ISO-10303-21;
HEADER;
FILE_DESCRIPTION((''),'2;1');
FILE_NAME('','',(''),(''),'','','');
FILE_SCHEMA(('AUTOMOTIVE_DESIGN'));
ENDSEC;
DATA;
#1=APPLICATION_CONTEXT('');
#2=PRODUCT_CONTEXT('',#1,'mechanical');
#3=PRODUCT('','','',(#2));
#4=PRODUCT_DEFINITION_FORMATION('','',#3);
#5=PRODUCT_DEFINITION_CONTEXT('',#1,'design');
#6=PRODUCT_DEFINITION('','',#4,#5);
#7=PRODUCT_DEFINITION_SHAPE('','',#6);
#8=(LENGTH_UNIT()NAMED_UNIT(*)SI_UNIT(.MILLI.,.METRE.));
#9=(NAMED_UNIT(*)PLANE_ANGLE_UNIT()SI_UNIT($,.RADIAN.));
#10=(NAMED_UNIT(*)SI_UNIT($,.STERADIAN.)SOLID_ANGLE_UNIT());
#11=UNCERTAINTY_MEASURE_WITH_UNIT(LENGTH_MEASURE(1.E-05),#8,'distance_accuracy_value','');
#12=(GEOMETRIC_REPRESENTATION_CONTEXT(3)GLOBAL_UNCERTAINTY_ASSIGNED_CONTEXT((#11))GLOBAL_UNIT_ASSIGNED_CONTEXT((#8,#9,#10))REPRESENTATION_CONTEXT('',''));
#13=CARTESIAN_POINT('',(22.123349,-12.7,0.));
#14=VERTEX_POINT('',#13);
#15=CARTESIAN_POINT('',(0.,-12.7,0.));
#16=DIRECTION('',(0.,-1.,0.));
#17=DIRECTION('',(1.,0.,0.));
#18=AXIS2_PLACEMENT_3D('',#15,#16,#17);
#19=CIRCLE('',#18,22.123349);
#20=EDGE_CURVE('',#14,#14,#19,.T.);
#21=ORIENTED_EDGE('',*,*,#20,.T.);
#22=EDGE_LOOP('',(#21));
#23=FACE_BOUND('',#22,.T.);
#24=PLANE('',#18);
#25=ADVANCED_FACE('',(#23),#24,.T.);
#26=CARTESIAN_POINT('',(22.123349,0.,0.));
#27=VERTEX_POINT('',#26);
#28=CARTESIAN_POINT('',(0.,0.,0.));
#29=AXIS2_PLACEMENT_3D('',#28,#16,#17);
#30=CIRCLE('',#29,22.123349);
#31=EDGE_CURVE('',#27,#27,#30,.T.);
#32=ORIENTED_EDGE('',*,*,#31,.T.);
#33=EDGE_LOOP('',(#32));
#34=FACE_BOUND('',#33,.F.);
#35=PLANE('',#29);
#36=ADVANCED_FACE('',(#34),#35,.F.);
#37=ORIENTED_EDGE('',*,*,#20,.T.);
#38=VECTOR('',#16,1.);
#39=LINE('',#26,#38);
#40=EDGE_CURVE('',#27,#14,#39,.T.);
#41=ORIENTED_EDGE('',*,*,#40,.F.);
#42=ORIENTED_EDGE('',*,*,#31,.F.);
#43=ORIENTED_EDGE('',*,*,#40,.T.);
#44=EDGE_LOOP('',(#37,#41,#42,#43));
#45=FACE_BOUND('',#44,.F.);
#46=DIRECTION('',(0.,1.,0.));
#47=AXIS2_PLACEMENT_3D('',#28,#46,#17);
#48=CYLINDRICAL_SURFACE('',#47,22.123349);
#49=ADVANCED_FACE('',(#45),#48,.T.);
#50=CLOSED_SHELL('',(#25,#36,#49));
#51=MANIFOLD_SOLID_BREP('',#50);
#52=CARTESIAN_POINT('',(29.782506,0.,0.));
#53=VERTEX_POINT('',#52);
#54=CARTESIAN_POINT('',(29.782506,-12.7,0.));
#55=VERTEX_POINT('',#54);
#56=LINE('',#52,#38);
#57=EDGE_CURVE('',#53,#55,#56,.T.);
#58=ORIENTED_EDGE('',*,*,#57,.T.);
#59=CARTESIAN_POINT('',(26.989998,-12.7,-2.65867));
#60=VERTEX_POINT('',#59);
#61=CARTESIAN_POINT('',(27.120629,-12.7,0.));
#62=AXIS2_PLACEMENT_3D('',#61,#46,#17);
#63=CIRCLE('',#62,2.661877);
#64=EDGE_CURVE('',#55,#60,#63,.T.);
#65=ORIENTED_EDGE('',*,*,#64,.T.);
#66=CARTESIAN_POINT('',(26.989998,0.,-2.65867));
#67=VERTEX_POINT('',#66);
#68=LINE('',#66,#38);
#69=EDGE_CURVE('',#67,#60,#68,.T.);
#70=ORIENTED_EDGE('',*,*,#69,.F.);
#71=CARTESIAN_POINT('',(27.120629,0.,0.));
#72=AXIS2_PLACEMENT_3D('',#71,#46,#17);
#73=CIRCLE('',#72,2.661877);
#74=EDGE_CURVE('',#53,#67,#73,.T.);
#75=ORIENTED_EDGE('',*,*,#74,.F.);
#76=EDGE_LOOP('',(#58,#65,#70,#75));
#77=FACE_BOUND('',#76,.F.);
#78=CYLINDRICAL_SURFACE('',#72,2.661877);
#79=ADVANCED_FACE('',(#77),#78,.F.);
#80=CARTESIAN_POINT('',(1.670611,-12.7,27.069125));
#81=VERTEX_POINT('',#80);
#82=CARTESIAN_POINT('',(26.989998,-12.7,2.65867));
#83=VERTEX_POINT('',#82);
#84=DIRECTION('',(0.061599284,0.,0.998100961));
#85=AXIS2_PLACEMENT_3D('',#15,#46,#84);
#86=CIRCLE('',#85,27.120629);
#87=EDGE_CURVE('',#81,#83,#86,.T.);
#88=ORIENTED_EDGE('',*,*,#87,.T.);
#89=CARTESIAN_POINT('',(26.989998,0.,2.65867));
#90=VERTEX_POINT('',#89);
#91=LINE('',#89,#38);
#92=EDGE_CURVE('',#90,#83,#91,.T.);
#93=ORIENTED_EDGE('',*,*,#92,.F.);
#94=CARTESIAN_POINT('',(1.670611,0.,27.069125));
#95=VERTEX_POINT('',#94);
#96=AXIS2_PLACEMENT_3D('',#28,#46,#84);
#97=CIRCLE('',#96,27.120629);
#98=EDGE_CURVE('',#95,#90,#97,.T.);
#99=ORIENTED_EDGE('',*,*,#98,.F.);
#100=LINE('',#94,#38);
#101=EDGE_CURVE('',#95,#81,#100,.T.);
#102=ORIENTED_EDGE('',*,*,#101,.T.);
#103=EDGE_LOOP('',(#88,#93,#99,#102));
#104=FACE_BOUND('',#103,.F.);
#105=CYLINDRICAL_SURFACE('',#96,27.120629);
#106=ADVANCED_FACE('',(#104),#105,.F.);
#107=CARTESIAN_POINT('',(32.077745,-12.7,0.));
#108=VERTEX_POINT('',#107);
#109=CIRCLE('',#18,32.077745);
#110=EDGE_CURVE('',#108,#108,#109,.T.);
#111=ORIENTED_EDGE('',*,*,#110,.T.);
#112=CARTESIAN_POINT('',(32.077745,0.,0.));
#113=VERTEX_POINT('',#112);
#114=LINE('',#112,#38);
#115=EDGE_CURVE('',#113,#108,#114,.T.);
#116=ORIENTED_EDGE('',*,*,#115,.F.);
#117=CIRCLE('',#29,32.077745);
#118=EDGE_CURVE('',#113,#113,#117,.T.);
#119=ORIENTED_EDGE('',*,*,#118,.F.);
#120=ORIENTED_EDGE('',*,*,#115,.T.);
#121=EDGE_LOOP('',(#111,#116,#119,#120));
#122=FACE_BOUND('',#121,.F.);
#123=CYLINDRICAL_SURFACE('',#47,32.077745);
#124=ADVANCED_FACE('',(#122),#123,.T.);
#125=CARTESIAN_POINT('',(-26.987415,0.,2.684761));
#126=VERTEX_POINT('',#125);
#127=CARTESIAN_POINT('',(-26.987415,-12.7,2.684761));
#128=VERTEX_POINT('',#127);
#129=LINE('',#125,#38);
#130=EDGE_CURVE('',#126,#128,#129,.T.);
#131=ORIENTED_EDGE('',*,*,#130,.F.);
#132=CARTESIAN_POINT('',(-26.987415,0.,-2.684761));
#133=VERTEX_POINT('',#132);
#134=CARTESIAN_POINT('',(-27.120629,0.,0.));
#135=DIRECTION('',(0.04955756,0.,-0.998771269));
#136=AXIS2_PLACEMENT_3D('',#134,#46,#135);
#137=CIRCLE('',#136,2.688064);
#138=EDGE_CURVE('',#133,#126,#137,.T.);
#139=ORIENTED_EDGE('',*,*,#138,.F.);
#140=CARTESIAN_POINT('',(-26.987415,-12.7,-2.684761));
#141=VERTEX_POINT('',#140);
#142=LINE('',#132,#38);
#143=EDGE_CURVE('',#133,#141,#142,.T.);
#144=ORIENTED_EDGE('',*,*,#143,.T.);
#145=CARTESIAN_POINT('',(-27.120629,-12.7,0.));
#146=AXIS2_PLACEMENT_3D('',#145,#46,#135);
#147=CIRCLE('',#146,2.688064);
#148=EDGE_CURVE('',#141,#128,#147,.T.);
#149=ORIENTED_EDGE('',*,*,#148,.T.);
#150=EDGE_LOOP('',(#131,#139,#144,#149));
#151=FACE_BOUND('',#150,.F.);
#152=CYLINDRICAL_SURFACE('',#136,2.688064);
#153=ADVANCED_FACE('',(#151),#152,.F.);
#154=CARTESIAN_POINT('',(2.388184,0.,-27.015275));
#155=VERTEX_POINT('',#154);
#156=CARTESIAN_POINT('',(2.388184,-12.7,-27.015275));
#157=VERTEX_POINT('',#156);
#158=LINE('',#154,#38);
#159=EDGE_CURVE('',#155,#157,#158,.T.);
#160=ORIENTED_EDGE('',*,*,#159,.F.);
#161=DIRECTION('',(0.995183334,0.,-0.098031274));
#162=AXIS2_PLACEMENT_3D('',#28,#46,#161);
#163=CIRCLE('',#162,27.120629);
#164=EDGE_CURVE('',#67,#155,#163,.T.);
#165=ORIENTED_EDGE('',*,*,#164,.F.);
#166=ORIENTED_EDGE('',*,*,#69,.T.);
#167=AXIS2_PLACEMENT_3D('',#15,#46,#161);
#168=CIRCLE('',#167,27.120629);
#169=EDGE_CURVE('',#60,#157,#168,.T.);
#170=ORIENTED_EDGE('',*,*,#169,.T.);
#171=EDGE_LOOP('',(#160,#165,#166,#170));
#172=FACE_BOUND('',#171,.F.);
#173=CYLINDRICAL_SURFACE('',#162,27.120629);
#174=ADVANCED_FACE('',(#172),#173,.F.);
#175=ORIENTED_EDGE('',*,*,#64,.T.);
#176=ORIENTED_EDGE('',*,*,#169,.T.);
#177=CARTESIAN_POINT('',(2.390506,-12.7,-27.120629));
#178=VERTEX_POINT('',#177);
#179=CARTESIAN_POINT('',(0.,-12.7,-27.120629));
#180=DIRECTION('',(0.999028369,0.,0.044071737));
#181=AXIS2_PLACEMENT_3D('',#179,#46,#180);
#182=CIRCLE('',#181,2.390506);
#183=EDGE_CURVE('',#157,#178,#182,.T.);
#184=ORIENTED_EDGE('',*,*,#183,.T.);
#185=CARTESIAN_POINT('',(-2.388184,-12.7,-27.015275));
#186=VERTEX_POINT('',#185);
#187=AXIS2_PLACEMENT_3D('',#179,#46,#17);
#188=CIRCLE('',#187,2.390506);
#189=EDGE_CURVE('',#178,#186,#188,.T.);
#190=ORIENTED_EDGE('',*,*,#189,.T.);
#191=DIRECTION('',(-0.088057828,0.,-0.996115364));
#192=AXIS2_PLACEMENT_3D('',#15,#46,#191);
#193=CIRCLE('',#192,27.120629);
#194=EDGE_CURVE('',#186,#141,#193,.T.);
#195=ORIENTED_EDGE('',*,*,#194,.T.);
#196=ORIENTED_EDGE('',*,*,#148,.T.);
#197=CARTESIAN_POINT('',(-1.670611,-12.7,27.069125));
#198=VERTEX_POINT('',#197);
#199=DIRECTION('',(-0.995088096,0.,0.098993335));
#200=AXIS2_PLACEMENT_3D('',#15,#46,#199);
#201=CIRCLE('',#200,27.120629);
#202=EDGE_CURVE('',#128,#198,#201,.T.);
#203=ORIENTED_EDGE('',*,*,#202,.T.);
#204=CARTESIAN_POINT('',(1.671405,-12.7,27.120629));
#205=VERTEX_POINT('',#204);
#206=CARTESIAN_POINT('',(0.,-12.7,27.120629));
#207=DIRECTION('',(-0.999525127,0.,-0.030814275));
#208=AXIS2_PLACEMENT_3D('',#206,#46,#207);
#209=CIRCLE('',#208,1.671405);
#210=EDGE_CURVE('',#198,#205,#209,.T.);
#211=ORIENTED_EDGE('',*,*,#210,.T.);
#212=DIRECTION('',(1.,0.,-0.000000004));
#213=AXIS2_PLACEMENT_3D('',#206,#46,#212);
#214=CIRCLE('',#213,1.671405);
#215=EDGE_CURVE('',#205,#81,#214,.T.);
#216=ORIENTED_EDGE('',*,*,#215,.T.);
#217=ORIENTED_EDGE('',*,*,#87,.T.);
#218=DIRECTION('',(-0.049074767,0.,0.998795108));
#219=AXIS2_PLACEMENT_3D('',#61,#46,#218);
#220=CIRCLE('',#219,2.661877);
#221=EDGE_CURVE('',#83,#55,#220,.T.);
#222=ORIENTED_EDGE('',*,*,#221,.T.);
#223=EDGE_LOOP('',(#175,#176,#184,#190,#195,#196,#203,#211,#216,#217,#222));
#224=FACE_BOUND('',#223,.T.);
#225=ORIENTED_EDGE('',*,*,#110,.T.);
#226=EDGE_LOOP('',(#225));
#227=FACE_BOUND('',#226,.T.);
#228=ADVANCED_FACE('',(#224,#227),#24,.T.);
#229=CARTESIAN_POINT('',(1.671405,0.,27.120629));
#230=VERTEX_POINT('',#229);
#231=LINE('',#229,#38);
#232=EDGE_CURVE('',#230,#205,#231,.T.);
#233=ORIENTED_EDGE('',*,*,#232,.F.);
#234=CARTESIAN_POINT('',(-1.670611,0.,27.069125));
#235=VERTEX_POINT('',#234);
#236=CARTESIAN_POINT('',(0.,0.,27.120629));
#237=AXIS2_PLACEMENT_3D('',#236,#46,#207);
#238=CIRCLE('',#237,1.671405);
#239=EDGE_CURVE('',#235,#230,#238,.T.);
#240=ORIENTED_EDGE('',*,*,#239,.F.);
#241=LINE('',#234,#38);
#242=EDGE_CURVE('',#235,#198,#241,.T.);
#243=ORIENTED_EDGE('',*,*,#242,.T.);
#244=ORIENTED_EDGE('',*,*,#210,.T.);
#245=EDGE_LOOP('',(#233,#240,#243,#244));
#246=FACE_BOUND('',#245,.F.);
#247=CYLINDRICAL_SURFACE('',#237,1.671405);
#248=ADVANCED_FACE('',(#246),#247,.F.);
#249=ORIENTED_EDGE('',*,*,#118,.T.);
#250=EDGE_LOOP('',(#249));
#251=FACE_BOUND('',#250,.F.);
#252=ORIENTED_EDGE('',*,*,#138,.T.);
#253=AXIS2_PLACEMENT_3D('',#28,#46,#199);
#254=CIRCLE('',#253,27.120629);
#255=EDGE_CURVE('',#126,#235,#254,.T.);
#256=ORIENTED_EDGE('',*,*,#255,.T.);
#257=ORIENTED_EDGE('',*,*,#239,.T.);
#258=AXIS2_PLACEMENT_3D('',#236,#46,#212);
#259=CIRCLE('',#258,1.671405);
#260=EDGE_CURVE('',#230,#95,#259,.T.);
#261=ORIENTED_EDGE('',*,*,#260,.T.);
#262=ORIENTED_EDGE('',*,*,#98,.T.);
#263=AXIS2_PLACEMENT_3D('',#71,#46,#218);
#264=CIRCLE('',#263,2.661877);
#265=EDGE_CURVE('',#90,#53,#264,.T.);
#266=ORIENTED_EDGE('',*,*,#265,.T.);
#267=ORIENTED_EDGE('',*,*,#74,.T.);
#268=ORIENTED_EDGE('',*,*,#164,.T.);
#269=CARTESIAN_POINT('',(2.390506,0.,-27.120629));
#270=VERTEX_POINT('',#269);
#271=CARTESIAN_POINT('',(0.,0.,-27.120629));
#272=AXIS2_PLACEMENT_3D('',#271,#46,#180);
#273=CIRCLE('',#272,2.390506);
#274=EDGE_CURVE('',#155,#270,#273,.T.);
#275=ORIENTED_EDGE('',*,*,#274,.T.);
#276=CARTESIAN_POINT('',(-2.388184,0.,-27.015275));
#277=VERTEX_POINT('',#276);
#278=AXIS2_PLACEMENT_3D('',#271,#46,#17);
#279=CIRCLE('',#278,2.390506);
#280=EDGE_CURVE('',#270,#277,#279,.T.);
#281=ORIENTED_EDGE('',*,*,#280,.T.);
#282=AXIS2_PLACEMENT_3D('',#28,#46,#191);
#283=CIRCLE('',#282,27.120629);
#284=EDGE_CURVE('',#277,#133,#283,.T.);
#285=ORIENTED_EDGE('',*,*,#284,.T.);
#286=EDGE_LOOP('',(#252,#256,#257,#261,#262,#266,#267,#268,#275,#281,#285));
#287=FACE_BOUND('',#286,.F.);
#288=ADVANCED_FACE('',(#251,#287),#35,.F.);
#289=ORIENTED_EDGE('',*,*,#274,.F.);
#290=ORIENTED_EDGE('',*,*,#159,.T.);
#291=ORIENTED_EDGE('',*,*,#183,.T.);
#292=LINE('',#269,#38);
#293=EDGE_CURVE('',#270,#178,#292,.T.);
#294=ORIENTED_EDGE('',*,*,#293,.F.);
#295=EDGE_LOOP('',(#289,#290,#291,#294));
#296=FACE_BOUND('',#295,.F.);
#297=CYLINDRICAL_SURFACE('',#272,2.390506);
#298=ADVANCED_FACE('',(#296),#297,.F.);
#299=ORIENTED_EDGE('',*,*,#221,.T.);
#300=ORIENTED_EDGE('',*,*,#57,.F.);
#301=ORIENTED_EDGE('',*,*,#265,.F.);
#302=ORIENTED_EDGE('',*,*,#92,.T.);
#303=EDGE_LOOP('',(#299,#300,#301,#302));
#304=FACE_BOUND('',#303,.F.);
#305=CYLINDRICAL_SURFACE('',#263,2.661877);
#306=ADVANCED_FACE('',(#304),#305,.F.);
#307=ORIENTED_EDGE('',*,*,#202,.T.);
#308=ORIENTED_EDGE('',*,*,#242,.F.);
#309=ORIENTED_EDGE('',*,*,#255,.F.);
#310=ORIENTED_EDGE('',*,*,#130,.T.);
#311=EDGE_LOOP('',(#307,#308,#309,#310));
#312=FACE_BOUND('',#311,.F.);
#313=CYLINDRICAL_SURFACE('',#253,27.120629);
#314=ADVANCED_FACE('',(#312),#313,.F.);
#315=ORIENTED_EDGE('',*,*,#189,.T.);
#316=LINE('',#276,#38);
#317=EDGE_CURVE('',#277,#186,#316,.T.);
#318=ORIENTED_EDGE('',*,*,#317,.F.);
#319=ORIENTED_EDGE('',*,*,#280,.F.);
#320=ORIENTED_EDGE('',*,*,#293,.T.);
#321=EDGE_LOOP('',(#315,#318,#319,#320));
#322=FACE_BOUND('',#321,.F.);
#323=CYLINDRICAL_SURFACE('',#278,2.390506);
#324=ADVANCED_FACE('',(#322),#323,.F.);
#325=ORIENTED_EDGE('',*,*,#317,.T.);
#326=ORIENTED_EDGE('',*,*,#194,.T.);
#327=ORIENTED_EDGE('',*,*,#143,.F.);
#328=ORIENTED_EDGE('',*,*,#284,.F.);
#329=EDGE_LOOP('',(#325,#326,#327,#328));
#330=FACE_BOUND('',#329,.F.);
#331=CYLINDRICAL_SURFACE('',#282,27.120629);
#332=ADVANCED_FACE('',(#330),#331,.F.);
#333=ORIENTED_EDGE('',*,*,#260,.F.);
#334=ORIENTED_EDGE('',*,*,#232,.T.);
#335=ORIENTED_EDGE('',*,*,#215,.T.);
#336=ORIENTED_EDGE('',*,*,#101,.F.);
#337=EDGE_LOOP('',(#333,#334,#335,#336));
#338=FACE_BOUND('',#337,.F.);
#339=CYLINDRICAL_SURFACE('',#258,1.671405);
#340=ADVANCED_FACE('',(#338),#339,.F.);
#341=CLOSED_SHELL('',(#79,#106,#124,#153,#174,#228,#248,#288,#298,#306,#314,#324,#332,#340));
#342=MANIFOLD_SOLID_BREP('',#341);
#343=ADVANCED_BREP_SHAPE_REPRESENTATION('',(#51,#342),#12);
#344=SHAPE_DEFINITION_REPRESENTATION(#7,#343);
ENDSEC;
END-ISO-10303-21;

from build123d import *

# Parameters (mm, degrees)
F0_R     = 32.0777446032
F1_DEPTH = 12.7
F0_R_2   = 22.1233486921


# Not quite as in the source:
# - a feature of the source that left no trace in its solid (it failed there, or was rolled back) is left out
# - a feature names something its author has since deleted; it is built from what else it names


with BuildPart() as f1:
    # F0 (on Front) → F1 (new body)
    with BuildSketch(Plane.XZ):
        Circle(F0_R)
        with BuildLine():
            ThreePointArc((1.6706113004, 27.0691254094), (18.8235281215, 19.5244278176), (26.9899975467, 2.658669775))
            ThreePointArc((26.9899975467, 2.658669775), (28.9560938487, 1.9278632057), (29.7825055927, 0))
            ThreePointArc((29.7825055927, 0), (28.9560938487, -1.9278632057), (26.9899975467, -2.658669775))
            ThreePointArc((26.9899975467, -2.658669775), (19.0808918692, -19.2729877814), (2.3881836562, -27.0152747787))
            ThreePointArc((2.3881836562, -27.0152747787), (2.3899256032, -27.0679388604), (2.3905063462, -27.1206285426))
            ThreePointArc((2.3905063462, -27.1206285426), (-0.0526896822, -29.5105541458), (-2.3881836562, -27.0152747787))
            ThreePointArc((-2.3881836562, -27.0152747787), (-19.0715734338, -19.2822088804), (-26.9874146305, -2.684761462))
            ThreePointArc((-26.9874146305, -2.684761462), (-29.8086929121, 0), (-26.9874146305, 2.684761462))
            ThreePointArc((-26.9874146305, 2.684761462), (-18.8140881746, 19.5335244824), (-1.6706113004, 27.0691254094))
            ThreePointArc((-1.6706113004, 27.0691254094), (-0.0257546243, 28.7918351095), (1.6714050047, 27.1206285426))
            ThreePointArc((1.6714050047, 27.1206285426), (1.6712065668, 27.0948739183), (1.6706113004, 27.0691254094))
        make_face(mode=Mode.SUBTRACT)
    extrude(amount=F1_DEPTH)


with BuildPart() as f1b:
    # F0 (on Front) → F1, piece 2 (new body)
    with BuildSketch(Plane.XZ):
        Circle(F0_R_2)
    extrude(amount=F1_DEPTH)


solid = Compound([f1.part, f1b.part])
